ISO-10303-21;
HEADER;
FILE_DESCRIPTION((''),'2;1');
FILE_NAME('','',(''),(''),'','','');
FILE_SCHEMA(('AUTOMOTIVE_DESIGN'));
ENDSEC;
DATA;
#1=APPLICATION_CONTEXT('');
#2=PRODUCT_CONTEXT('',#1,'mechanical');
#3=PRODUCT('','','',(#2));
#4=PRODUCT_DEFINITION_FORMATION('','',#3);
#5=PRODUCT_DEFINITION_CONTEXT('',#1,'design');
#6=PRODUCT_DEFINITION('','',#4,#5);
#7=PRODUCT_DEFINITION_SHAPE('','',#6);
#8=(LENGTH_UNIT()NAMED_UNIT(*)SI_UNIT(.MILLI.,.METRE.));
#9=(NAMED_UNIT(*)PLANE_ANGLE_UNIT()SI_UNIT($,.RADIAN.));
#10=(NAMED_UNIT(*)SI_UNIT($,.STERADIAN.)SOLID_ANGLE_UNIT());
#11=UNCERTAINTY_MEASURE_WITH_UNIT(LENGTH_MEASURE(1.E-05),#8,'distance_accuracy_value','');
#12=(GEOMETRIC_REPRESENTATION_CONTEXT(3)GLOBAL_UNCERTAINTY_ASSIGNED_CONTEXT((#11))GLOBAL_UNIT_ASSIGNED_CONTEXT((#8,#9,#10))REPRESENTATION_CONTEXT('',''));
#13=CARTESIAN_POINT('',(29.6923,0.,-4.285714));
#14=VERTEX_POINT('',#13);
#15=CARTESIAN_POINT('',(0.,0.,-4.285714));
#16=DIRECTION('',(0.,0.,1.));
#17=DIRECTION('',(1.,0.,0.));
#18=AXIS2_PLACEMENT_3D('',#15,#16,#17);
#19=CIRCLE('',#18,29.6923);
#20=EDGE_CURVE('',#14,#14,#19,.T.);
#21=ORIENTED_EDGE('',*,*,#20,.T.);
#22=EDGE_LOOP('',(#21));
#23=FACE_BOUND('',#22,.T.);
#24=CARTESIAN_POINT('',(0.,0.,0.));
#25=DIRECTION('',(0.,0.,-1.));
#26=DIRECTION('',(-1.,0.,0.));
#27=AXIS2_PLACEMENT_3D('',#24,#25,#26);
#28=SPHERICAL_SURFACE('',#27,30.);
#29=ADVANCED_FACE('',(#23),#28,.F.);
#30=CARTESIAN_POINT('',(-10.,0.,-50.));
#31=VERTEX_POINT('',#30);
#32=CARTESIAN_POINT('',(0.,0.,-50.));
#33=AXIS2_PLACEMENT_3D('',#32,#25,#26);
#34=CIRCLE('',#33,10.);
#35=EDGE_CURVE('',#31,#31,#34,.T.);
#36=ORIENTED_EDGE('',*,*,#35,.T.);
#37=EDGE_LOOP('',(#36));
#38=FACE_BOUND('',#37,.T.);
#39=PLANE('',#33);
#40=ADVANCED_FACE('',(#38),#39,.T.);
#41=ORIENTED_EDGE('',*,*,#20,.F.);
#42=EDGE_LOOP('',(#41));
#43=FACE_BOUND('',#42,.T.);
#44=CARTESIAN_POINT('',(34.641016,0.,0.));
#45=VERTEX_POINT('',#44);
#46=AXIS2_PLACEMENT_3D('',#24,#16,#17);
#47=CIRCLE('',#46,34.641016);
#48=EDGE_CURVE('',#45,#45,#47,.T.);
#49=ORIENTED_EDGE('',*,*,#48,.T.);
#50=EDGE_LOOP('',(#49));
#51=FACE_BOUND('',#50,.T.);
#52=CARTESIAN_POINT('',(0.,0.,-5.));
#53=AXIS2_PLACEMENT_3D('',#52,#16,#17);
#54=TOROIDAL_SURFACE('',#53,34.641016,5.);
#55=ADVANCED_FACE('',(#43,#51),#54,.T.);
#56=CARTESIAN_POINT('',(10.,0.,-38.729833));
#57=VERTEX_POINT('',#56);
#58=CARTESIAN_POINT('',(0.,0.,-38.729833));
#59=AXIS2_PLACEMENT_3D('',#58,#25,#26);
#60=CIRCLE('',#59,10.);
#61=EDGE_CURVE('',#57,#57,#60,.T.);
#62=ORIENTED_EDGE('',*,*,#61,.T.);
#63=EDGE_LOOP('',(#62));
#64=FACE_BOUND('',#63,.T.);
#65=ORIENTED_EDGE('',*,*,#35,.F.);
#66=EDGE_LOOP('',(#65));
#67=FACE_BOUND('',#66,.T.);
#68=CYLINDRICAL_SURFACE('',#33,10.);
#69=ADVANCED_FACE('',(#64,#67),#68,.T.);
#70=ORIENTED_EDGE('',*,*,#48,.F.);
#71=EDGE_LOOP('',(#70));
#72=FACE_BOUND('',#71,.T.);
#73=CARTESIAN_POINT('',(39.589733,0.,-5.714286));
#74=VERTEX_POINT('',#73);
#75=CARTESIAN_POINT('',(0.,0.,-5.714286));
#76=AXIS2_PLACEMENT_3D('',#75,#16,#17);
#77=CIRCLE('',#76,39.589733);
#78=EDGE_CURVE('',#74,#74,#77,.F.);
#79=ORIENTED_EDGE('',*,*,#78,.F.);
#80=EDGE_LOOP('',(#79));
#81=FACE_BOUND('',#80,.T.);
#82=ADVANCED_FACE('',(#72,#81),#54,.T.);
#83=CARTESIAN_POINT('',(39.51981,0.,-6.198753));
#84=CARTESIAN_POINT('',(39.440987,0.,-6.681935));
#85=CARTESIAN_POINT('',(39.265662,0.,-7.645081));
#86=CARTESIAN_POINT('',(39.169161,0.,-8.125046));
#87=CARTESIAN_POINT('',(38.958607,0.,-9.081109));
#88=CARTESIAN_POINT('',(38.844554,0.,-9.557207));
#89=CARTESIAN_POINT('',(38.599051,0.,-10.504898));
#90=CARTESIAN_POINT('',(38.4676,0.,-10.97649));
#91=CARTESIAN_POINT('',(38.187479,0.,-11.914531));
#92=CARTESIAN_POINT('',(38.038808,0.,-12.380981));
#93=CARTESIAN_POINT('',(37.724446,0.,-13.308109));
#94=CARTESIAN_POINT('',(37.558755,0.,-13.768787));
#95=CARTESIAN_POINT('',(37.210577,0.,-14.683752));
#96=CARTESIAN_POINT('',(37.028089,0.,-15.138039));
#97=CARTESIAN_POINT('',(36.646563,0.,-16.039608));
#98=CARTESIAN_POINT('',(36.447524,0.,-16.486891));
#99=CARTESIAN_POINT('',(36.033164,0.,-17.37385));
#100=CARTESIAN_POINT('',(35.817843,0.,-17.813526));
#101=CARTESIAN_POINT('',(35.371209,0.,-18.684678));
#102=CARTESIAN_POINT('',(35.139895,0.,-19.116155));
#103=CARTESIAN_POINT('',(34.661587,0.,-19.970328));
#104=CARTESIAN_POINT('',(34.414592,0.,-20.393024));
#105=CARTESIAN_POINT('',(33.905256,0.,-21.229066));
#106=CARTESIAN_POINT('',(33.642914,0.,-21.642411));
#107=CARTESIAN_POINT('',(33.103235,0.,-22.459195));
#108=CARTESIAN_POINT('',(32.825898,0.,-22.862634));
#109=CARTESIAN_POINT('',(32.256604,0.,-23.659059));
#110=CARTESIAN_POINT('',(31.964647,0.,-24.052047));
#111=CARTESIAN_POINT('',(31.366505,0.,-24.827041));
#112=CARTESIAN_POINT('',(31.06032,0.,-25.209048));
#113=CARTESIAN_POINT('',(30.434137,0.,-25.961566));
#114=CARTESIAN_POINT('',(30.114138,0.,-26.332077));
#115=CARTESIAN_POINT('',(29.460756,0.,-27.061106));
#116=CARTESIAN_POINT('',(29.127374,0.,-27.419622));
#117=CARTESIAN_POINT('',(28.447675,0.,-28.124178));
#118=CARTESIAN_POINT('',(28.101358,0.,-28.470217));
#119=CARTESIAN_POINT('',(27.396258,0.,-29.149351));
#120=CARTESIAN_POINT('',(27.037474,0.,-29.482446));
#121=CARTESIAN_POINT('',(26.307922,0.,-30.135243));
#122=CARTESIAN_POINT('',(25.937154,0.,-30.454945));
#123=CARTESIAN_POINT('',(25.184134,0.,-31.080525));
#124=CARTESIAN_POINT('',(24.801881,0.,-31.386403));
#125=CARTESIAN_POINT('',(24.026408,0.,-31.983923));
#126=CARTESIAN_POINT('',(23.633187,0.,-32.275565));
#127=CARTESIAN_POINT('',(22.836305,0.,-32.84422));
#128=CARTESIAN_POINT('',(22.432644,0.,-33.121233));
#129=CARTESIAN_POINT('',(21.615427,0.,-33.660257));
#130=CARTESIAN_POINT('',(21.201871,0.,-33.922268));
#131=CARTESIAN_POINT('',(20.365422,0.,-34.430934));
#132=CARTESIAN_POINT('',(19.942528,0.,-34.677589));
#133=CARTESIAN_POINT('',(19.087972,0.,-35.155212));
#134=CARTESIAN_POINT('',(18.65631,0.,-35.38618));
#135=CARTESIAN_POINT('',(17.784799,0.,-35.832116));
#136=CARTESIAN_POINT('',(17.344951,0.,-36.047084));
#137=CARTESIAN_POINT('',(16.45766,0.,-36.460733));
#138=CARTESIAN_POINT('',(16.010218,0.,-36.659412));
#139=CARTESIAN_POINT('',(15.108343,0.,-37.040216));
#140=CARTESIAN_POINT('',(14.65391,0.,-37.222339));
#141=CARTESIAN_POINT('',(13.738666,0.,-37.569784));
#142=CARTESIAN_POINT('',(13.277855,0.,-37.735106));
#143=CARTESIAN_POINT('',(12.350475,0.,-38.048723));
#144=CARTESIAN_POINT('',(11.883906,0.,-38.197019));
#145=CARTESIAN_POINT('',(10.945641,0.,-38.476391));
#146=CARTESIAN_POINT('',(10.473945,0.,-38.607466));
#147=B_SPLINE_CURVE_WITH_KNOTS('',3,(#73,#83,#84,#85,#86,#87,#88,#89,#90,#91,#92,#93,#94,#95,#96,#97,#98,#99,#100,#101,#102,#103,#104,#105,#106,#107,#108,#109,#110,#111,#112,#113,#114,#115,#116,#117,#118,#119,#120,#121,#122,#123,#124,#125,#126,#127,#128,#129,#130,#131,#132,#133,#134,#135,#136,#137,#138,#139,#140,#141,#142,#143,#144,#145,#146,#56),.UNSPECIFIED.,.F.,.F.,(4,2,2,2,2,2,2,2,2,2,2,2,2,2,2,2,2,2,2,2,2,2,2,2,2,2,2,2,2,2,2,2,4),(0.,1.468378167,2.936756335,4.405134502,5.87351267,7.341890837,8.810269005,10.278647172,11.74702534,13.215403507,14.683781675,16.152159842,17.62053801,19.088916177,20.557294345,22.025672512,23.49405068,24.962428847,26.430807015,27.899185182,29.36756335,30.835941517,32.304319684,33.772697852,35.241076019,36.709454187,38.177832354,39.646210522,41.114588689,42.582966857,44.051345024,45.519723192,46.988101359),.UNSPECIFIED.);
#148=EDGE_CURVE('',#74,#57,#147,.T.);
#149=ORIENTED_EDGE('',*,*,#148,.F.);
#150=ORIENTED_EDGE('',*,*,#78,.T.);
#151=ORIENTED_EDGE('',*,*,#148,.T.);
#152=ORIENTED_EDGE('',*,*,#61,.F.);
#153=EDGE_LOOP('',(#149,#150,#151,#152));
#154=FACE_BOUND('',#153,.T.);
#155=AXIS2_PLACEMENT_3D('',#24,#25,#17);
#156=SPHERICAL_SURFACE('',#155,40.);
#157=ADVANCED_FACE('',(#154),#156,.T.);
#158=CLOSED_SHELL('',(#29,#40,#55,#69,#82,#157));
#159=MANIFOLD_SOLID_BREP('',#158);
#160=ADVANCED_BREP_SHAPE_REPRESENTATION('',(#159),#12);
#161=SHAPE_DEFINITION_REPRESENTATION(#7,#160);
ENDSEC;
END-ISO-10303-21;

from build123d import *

# Parameters (mm, degrees)
FILLET3_R = 5


with BuildPart() as part:
    # Sketch1 → Revolve4 (revolve)
    with BuildSketch(Plane(origin=(0, 0, 0), x_dir=(1, 0, 0), z_dir=(0, 1, 0)), mode=Mode.PRIVATE) as revolve4_sk:
        with BuildLine():
            Line((0, 40), (1.22e-15, 30))
            ThreePointArc((1.22e-15, 30), (21.213203435596427, 21.213203435596427), (30, -1.22e-15))
            Line((30, -1.22e-15), (40, 0))
            ThreePointArc((40, 0), (31.62277660168379, 24.494897427831773), (9.999999999999998, 38.72983346207416))
            Line((9.999999999999998, 38.72983346207416), (10.000000000000002, 50))
            Line((10.000000000000002, 50), (2.45e-15, 50))
            Line((2.45e-15, 50), (0, 40))
        make_face()
    revolve(revolve4_sk.sketch.rotate(Axis((2.45e-15, 0, -50), (-2.4e-16, 0, 1)), 180), axis=Axis((2.45e-15, 0, -50), (-2.4e-16, 0, 1)))

    # Fillet3
    # the kernel refuses this fillet: 5 mm, written as the material it takes off along each edge
    with BuildSketch(Plane(origin=(-9.8e-15, 0, -7.11e-15), x_dir=(-1, 1.2e-16, -2.4e-16), z_dir=(1.2e-16, 1, 0))) as fillet3_piece_1:
        with BuildLine():
            CenterArc((34.641016151377556, -5.000000000000001), FILLET3_R, 90, 81.78678929826185)
            Line((34.641016151377556, -1.29e-15), (30.000000000000007, 0))
            ThreePointArc((30.000000000000007, 0), (29.922976011333738, -2.1483730181571907), (29.69229955832362, -4.2857142857142865))
        make_face()
    revolve(axis=Axis((-9.8e-15, 0, -7.11e-15), (-2.4e-16, 0, 1)), mode=Mode.SUBTRACT)
    with BuildSketch(Plane(origin=(-9.8e-15, 0, -1.421e-14), x_dir=(-1, 1.2e-16, -2.4e-16), z_dir=(1.2e-16, 1, 0))) as fillet3_piece_2:
        with BuildLine():
            CenterArc((34.64101615137755, -4.999999999999993), FILLET3_R, 351.78678929826174, 98.21321070173826)
            ThreePointArc((39.58973274443148, -5.714285714285711), (39.89730134844499, -2.8644973575429207), (40.000000000000014, 0))
            Line((40.000000000000014, 0), (34.64101615137755, 6.71e-15))
        make_face()
    revolve(axis=Axis((-9.8e-15, 0, -1.421e-14), (-2.4e-16, 0, 1)), mode=Mode.SUBTRACT)


solid = part.part
